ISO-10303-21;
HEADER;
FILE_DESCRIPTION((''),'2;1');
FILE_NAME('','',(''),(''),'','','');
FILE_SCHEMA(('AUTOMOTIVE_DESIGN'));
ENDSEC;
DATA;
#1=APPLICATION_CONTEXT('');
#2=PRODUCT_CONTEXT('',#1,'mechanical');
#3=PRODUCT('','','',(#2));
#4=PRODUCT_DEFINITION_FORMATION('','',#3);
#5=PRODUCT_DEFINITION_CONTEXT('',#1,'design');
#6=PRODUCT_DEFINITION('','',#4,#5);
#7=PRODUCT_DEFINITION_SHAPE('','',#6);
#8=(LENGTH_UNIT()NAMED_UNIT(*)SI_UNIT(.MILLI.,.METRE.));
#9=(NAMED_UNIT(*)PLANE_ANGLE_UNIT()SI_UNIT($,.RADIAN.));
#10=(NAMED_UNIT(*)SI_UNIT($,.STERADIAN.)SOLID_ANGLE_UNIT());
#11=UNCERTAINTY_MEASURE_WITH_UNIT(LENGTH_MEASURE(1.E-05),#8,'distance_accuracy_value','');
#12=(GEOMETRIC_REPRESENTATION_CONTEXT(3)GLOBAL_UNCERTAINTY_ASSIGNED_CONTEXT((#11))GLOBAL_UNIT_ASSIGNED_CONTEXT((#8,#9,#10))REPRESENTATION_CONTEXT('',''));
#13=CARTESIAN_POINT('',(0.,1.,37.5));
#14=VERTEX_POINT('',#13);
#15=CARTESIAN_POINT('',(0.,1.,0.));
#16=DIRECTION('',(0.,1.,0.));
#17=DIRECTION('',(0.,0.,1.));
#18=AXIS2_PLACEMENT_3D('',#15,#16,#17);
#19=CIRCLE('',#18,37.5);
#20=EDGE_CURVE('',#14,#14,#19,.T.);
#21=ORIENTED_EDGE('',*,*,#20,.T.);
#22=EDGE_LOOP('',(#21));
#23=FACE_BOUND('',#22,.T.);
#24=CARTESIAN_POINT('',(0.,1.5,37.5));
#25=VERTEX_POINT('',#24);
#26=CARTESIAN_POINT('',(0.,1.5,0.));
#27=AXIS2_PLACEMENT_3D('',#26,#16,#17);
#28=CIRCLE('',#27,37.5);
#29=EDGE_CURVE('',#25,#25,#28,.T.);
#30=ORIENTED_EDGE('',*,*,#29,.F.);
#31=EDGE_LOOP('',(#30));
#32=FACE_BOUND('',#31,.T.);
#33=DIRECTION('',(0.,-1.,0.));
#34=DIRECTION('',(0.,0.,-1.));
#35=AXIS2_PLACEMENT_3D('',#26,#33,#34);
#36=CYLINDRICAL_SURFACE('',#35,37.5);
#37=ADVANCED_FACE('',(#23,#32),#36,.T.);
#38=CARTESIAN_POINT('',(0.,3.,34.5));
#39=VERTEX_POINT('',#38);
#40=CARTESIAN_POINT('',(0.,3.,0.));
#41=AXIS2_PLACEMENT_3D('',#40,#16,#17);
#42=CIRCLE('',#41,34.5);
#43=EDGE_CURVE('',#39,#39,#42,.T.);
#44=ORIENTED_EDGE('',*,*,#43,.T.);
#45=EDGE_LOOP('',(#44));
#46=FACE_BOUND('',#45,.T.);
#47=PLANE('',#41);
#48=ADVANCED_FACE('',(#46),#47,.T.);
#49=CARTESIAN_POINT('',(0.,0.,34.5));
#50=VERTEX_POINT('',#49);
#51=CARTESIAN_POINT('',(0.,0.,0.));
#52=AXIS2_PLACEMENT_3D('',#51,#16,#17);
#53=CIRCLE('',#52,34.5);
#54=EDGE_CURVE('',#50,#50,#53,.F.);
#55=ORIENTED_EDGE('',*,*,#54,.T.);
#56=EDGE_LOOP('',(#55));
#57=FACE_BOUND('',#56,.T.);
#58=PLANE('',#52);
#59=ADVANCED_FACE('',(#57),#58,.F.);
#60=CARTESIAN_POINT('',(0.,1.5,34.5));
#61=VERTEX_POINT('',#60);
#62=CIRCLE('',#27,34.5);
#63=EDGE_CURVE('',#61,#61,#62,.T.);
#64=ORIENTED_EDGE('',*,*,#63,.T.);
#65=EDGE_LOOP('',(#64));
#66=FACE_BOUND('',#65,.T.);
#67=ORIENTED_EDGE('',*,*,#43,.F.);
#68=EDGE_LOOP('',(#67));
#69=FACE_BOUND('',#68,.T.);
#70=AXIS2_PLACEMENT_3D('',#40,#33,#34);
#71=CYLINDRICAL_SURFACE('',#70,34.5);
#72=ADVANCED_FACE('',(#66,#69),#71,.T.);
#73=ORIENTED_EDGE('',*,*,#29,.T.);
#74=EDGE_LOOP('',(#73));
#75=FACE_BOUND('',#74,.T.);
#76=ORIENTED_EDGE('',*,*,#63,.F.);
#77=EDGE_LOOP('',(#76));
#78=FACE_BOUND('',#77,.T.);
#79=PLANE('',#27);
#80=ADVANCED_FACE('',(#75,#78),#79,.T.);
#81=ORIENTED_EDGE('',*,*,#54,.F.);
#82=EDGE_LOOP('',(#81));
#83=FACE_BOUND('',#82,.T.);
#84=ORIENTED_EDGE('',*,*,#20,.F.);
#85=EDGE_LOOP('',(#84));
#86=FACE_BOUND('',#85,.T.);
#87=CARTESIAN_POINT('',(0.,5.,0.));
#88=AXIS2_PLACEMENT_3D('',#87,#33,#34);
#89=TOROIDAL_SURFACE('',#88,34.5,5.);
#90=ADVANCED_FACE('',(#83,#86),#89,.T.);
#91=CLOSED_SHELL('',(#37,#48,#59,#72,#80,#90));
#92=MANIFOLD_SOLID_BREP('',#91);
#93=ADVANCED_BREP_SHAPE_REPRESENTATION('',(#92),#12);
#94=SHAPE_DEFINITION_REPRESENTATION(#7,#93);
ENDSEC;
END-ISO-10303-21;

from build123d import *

# Parameters (mm, degrees)
SKETCH1_R           = 37.5
BOSS_EXTRUDE1_DEPTH = 1
SKETCH2_R           = 34.5
BOSS_EXTRUDE2_DEPTH = 3
FILLET1_R           = 5
SKETCH3_R           = 37.5
BOSS_EXTRUDE3_DEPTH = 0.5


with BuildPart() as part:
    # Sketch1 → Boss-Extrude1 (new body)
    with BuildSketch(Plane(origin=(0, 0, 0), x_dir=(1, 0, 0), z_dir=(0, 1, 0))):
        with Locations(Location((0, 0, 0), (0, 0, 270))):
            Circle(SKETCH1_R)
    extrude(amount=BOSS_EXTRUDE1_DEPTH)

    # Sketch2 → Boss-Extrude2 (add)
    with BuildSketch(Plane(origin=(0, 0, 0), x_dir=(1, 0, 0), z_dir=(0, 1, 0))):
        with Locations(Location((0, 0, 0), (0, 0, 270))):
            Circle(SKETCH2_R)
    extrude(amount=BOSS_EXTRUDE2_DEPTH)

    # Fillet1
    # the kernel refuses this fillet: 5 mm, written as the material it takes off along each edge
    with BuildSketch(Plane(origin=(0, 0, 0), x_dir=(0, 0, 1), z_dir=(-1, 0, 0))) as fillet1_piece_1:
        with BuildLine():
            CenterArc((34.5, 5), FILLET1_R, 270, 36.869897646)
            Line((34.5, 0), (34.5, -0.1))
            Line((34.5, -0.1), (37.5, -0.1))
            Line((37.5, -0.1), (37.6, 0))
            ThreePointArc((37.6, 0), (37.6, 0.5), (37.56, 0.92))
            Line((37.56, 0.92), (37.5, 1))
        make_face()
    revolve(axis=Axis((0, 0, 0), (0, 1, 0)), mode=Mode.SUBTRACT)

    # Sketch3 → Boss-Extrude3 (add)
    with BuildSketch(Plane(origin=(0, 1, 0), x_dir=(1, 0, 0), z_dir=(0, 1, 0))):
        with Locations(Location((0, 0, 0), (0, 0, 270))):
            Circle(SKETCH3_R)
    extrude(amount=BOSS_EXTRUDE3_DEPTH)


solid = part.part
